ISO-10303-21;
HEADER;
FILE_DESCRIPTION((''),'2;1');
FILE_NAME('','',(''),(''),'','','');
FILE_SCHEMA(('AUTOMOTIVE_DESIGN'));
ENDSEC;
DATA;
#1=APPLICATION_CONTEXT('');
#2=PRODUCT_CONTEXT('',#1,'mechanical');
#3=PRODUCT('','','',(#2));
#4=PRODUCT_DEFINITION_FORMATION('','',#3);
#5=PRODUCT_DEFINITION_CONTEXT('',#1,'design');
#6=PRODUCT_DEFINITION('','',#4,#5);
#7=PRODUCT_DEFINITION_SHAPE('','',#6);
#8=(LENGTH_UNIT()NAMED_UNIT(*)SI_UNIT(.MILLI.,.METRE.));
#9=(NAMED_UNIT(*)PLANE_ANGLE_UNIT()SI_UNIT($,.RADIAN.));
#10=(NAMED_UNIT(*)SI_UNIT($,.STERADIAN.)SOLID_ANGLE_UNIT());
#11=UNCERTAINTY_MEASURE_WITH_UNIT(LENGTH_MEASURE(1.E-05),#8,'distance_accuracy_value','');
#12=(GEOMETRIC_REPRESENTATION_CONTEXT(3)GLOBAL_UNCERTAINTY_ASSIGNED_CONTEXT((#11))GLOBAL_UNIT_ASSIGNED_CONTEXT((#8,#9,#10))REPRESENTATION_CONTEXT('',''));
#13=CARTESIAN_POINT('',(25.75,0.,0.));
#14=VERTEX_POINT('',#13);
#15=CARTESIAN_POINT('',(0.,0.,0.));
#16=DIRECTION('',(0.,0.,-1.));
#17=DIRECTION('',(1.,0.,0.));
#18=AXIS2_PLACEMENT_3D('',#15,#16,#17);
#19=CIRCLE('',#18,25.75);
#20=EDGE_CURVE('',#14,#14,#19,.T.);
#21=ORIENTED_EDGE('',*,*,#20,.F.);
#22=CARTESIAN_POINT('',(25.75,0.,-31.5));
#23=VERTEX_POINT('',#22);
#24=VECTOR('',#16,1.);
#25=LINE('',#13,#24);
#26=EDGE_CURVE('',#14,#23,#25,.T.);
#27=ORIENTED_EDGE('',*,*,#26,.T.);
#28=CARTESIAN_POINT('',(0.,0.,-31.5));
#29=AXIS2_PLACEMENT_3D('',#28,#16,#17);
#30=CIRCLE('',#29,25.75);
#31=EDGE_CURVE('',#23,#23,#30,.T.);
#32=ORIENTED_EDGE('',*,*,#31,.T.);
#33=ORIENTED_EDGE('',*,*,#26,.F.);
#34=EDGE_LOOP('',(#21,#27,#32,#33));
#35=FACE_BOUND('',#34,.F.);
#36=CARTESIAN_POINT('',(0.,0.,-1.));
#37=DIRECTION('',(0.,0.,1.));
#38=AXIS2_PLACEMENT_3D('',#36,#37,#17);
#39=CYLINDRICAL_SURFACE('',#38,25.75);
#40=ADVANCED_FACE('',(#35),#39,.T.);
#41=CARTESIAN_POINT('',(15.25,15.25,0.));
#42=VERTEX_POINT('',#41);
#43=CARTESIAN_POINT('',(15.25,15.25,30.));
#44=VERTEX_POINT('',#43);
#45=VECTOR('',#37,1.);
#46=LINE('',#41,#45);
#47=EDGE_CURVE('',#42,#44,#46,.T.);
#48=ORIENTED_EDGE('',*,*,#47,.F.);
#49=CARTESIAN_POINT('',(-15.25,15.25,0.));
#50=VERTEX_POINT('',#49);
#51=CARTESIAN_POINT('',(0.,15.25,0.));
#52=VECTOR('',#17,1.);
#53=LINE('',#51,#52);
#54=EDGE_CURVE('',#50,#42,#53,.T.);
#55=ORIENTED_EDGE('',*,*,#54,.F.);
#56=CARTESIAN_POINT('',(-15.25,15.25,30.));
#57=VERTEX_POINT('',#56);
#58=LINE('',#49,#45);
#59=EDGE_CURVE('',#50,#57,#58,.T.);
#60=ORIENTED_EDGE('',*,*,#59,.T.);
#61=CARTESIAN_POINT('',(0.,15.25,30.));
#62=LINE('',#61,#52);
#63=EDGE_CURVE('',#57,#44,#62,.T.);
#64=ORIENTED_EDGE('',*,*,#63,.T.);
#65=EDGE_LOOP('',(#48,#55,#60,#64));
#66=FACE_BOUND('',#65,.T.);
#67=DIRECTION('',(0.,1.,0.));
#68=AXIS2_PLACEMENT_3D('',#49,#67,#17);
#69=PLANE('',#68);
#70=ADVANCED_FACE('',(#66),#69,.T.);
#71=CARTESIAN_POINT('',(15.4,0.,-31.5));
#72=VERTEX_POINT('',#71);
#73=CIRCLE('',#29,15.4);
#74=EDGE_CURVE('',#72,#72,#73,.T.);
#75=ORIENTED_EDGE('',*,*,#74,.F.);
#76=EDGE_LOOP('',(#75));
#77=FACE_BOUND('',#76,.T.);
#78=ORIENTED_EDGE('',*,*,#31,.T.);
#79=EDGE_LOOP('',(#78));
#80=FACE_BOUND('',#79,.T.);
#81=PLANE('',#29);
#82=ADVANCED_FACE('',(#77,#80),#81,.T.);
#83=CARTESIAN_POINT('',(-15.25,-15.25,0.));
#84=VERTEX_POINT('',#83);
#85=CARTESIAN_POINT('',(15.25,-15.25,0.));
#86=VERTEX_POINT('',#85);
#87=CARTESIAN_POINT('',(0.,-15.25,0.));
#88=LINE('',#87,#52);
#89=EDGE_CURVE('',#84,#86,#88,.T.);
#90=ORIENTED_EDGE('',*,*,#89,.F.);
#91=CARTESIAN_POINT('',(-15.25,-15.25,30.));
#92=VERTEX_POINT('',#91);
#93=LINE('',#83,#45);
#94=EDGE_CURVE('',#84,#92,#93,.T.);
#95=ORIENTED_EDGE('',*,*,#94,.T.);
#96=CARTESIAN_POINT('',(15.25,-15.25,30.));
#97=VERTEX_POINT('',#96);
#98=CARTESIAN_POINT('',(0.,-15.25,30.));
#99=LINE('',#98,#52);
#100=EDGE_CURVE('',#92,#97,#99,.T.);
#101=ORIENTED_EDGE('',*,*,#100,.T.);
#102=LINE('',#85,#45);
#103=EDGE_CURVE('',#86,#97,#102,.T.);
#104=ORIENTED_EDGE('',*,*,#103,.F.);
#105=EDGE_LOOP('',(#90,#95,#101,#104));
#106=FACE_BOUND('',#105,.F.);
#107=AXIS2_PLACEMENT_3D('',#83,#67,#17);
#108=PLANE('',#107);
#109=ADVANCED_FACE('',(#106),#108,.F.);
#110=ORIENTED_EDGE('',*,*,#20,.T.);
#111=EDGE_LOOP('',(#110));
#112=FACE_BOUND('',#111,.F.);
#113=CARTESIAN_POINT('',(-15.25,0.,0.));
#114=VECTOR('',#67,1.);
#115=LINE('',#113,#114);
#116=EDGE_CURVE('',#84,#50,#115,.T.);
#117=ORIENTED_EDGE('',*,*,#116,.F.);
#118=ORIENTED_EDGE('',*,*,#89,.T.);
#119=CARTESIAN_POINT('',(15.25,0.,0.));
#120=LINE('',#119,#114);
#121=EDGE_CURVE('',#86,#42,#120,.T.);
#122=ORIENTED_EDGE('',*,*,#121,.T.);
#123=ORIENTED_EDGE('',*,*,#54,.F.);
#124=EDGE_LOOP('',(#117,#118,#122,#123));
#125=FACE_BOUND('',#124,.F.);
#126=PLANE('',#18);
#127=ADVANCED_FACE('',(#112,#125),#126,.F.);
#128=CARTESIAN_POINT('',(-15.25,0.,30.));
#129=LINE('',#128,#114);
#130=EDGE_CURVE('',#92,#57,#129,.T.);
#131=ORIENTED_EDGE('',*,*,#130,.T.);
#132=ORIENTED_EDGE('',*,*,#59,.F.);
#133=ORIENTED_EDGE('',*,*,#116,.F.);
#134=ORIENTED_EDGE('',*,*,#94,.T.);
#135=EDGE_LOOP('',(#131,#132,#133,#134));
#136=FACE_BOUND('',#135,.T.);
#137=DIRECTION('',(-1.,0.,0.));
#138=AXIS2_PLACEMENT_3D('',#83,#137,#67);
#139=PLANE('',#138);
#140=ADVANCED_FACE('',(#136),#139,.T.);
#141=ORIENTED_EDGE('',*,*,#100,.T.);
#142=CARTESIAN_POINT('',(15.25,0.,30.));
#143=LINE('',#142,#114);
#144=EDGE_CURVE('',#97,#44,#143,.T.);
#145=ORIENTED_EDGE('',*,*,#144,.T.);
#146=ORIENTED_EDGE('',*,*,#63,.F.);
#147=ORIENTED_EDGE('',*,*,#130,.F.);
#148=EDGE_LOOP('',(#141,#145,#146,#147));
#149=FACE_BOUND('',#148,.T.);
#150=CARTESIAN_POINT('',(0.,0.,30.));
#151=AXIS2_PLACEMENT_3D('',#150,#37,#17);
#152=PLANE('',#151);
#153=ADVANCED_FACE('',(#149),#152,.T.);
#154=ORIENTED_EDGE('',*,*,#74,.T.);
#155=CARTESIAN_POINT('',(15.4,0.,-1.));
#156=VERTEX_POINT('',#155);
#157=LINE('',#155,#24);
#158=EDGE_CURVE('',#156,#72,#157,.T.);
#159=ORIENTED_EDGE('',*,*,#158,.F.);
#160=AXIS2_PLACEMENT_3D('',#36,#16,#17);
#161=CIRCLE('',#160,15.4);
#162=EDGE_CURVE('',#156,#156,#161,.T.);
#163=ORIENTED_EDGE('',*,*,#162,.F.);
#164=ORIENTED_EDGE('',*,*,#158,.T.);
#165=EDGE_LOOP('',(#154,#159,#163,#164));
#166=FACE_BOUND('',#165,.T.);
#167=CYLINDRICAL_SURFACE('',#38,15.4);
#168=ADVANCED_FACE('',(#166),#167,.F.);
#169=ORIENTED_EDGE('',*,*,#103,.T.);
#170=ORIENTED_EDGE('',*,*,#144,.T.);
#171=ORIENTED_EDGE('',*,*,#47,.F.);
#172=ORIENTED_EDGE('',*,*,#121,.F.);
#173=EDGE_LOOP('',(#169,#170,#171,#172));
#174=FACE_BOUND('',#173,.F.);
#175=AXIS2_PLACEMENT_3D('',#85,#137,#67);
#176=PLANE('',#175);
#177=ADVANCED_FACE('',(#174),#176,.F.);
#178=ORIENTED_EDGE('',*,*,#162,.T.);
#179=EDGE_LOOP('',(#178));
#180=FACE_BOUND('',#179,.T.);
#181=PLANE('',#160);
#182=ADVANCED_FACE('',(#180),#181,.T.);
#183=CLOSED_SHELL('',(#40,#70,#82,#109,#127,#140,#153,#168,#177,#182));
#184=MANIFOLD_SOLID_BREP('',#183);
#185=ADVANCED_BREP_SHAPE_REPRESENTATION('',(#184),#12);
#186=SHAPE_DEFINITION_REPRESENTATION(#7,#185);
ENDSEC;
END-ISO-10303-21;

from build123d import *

# Parameters (mm, degrees)
F0_W     = 30.5
F0_H     = 30.5
F1_DEPTH = 30
F2_R     = 25.75
F2_W     = 30.5
F2_H     = 30.5
F2_R_2   = 15
F3_DEPTH = 1
F4_R     = 25.75
F4_R_2   = 15.4
F5_DEPTH = 30.5


# Not quite as in the source:
# - a feature names something its author has since deleted; it is built from what else it names


with BuildPart() as f1:
    # F0 (on Top) → F1 (new body)
    with BuildSketch(Plane.XY):
        Rectangle(F0_W, F0_H)
    extrude(amount=F1_DEPTH)

    # F2 (on face) → F3 (join)
    with BuildSketch(Plane(origin=(0, 0, 0), x_dir=(1, 0, 0), z_dir=(0, 0, -1))):
        Circle(F2_R)
        Rectangle(F2_W, F2_H, mode=Mode.SUBTRACT)
        Rectangle(F2_W, F2_H)
        Circle(F2_R_2, mode=Mode.SUBTRACT)
        Circle(F2_R_2)
    extrude(amount=F3_DEPTH)

    # F4 (on face) → F5 (join)
    with BuildSketch(Plane(origin=(0, 0, -1), x_dir=(1, 0, 0), z_dir=(0, 0, -1))):
        Circle(F4_R)
        Circle(F4_R_2, mode=Mode.SUBTRACT)
    extrude(amount=F5_DEPTH)


solid = f1.part
